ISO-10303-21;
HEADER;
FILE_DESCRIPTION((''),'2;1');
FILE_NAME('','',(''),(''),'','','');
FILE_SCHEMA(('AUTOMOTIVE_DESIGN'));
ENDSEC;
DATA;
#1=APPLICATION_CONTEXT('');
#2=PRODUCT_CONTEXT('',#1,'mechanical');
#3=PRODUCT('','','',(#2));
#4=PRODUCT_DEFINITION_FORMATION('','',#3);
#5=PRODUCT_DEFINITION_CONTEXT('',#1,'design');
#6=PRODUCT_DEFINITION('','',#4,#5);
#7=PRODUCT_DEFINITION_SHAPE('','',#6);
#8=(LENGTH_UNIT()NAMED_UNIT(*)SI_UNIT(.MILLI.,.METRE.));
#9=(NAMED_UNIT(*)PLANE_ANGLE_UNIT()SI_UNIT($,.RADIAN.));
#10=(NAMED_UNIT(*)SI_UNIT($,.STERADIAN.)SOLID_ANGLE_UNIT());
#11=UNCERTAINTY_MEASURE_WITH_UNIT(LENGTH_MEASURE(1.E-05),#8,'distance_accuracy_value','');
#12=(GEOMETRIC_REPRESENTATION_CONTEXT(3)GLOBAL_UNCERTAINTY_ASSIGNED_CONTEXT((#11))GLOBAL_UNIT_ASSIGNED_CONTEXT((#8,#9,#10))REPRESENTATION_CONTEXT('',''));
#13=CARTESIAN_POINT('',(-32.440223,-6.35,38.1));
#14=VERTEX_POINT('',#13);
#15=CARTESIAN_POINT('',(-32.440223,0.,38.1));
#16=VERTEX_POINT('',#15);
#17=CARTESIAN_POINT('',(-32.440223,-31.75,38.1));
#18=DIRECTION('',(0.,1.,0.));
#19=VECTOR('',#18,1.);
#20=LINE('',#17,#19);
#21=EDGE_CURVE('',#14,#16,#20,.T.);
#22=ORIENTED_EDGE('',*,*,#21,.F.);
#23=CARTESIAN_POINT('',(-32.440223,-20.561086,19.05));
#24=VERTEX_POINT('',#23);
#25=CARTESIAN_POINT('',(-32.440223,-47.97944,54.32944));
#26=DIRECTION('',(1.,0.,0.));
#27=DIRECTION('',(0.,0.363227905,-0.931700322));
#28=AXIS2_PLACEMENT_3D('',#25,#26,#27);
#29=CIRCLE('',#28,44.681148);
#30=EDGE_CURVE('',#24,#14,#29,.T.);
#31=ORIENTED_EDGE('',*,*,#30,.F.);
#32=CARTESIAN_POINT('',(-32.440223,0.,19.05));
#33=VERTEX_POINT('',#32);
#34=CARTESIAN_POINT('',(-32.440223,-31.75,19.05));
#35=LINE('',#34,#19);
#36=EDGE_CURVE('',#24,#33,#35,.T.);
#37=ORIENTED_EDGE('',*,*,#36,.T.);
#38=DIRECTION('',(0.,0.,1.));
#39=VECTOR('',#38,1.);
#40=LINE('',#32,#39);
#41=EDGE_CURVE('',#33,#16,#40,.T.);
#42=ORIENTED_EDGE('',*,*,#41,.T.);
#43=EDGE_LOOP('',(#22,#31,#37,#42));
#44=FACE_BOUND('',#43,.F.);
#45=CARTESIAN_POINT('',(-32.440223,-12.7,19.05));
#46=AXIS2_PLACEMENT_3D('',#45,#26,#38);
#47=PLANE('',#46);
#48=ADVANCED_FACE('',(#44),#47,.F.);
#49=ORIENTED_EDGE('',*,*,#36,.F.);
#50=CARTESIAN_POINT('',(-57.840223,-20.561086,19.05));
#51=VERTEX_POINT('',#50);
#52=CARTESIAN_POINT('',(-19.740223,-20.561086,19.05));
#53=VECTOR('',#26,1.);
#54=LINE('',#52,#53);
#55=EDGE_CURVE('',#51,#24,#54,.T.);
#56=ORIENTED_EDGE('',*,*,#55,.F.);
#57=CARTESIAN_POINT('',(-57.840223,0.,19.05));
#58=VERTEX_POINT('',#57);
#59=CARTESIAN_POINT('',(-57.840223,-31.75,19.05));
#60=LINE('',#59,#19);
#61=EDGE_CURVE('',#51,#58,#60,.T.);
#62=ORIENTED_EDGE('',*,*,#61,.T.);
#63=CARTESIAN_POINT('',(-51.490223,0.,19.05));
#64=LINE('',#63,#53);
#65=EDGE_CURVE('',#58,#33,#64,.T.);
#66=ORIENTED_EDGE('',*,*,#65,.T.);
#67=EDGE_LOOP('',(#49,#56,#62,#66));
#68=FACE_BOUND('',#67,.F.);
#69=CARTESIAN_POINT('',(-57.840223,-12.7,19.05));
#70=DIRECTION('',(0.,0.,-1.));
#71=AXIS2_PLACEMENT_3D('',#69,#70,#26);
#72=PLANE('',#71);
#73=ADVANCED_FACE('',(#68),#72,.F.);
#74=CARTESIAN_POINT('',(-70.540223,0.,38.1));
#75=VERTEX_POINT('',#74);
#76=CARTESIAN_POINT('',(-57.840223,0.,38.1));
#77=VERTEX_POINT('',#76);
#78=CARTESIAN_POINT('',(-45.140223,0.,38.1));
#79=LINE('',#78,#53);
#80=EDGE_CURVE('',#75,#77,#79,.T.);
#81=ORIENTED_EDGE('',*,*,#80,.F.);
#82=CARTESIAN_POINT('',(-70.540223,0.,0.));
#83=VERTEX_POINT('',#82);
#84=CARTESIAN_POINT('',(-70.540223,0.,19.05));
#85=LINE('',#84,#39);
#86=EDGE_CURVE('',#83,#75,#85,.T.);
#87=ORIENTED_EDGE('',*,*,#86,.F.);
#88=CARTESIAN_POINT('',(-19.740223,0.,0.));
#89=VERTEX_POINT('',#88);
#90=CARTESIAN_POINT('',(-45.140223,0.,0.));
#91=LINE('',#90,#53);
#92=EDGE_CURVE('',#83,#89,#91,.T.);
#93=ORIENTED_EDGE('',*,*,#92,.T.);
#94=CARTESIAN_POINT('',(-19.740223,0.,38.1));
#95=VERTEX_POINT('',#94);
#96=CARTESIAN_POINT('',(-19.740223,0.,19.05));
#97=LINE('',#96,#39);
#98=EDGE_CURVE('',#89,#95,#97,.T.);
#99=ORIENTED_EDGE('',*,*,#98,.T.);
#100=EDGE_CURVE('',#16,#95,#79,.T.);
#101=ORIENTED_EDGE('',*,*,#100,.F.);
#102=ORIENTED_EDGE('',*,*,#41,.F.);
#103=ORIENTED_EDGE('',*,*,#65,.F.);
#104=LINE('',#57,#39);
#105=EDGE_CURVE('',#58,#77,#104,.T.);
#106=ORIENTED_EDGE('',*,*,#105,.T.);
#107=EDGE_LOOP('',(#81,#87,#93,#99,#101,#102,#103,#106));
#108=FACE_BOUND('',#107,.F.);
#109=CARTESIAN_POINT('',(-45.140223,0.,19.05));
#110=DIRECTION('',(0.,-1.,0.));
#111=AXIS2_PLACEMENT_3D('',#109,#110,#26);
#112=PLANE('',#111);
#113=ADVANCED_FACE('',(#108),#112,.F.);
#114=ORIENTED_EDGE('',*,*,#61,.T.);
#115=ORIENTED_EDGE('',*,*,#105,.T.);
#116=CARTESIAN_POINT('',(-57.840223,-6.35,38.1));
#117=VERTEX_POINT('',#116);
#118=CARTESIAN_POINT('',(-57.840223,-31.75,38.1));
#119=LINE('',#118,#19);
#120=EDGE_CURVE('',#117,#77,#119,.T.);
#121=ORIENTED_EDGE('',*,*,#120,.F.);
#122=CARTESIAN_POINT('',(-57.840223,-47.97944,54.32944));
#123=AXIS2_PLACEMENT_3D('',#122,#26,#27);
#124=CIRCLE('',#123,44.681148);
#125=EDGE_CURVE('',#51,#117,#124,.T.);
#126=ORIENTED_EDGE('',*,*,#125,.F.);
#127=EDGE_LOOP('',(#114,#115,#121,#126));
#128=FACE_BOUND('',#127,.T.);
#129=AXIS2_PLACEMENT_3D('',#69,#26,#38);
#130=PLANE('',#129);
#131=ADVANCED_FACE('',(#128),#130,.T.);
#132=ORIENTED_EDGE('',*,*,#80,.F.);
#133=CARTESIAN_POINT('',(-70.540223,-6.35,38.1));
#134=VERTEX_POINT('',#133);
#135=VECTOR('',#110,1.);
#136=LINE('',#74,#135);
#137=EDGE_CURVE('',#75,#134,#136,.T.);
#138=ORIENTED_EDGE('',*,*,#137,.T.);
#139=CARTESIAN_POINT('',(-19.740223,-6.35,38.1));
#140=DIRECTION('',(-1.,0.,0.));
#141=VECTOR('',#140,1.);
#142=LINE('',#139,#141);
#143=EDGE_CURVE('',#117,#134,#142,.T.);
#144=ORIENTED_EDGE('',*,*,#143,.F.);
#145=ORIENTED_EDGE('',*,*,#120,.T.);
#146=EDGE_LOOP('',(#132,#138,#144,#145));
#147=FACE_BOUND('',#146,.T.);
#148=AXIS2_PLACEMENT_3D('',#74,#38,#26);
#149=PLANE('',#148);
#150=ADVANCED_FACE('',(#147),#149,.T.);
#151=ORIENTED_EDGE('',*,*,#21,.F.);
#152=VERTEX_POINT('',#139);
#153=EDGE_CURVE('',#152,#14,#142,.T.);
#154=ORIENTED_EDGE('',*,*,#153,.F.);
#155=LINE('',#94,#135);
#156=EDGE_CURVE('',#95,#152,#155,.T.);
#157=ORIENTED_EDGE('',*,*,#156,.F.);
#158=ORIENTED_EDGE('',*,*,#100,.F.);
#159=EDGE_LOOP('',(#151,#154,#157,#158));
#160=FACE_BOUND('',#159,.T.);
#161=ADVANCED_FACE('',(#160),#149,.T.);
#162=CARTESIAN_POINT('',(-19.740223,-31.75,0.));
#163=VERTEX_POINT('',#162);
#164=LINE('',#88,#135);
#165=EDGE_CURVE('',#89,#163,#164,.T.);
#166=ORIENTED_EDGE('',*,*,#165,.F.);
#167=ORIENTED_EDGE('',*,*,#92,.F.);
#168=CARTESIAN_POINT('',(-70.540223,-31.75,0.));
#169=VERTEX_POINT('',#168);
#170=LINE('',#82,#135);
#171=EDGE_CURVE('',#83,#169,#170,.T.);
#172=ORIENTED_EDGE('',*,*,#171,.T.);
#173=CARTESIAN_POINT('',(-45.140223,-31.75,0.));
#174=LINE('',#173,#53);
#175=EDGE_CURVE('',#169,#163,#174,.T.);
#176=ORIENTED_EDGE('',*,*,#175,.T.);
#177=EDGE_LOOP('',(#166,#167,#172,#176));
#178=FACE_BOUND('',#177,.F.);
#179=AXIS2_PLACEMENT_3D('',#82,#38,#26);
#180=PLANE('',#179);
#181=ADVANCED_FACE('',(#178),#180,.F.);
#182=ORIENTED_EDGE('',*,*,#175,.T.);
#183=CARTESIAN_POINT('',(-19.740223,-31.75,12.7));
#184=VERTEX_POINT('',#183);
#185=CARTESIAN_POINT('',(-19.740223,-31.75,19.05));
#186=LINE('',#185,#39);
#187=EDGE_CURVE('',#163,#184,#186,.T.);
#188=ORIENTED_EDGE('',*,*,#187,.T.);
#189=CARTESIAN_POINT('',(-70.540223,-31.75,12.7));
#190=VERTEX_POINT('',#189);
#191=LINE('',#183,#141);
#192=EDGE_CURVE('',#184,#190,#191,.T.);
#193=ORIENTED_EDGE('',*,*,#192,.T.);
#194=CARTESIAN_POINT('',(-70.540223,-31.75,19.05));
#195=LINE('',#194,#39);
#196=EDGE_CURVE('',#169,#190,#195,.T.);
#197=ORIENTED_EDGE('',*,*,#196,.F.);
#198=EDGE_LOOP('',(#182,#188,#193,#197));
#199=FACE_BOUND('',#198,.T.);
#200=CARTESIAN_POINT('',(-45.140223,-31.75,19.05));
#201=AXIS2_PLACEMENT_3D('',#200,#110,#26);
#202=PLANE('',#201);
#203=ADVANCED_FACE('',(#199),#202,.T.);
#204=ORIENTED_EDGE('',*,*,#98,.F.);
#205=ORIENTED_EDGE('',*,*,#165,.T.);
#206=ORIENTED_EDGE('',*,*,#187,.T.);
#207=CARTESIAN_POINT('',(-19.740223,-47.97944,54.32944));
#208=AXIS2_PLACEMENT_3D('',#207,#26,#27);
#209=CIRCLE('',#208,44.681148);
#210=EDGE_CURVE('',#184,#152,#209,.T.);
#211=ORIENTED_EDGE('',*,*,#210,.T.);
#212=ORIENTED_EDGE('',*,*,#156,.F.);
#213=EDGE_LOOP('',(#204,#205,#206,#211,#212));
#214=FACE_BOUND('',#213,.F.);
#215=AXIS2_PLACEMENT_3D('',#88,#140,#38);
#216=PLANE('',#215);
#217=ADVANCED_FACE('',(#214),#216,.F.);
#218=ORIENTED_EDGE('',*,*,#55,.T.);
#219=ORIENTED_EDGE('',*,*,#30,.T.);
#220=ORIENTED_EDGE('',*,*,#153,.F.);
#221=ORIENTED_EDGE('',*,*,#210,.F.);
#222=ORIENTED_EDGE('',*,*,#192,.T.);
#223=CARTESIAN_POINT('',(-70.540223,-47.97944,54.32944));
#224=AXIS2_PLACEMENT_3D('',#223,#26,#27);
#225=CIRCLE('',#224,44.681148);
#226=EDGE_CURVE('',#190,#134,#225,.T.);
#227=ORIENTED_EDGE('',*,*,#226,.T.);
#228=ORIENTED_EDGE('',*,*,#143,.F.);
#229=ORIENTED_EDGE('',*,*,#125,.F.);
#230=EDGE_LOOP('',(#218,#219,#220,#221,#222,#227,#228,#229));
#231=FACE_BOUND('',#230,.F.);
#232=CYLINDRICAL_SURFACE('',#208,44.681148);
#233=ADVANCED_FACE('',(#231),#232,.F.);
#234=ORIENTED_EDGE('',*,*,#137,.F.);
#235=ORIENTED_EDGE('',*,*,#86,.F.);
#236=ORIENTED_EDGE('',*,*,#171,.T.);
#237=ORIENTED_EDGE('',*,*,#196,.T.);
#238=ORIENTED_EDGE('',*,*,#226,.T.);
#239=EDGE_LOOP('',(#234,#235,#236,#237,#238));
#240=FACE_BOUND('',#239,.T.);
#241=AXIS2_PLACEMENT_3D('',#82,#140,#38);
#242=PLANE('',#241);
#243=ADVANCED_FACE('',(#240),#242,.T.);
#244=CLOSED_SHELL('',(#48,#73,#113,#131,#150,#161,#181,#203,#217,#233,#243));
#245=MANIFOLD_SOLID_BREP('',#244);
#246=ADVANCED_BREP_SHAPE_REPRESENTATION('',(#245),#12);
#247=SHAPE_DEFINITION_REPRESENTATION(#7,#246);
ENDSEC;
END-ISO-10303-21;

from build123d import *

# Parameters (mm, degrees)
F0_W     = 50.8
F0_H     = 38.1
F1_DEPTH = 31.75
F2_W     = 25.4
F2_H     = 19.05
F3_DEPTH = 19.05
F4_DEPTH = 25.4
F6_DEPTH = 50.8


with BuildPart() as f1:
    # F0 (on Front) → F1 (new body)
    with BuildSketch(Plane.XZ):
        with Locations((-45.1402231145, 19.05)):
            Rectangle(F0_W, F0_H)
    extrude(amount=F1_DEPTH)

    # F2 (on face) → F3 (cut)
    with BuildSketch(Plane.XZ.offset(31.75)):
        with Locations((-45.1402231145, 28.575)):
            Rectangle(F2_W, F2_H)
    extrude(amount=-F3_DEPTH, mode=Mode.SUBTRACT)

    # F4 (cut): a face of the model
    f4_faces = [f1.faces().sort_by_distance(p)[0] for p in [
        (-45.1402231145, -12.7, 28.575),
    ]]
    extrude(f4_faces, amount=-F4_DEPTH, mode=Mode.SUBTRACT)

    # F5 (on face) → F6 (cut)
    with BuildSketch(Plane.YZ.offset(-19.7402231145)):
        with BuildLine():
            ThreePointArc((-31.75, 12.7), (-16.3850971413, 22.7350971413), (-6.35, 38.1))
            Line((-6.35, 38.1), (-31.75, 38.1))
            Line((-31.75, 38.1), (-31.75, 12.7))
        make_face()
    extrude(amount=-F6_DEPTH, mode=Mode.SUBTRACT)


solid = f1.part
